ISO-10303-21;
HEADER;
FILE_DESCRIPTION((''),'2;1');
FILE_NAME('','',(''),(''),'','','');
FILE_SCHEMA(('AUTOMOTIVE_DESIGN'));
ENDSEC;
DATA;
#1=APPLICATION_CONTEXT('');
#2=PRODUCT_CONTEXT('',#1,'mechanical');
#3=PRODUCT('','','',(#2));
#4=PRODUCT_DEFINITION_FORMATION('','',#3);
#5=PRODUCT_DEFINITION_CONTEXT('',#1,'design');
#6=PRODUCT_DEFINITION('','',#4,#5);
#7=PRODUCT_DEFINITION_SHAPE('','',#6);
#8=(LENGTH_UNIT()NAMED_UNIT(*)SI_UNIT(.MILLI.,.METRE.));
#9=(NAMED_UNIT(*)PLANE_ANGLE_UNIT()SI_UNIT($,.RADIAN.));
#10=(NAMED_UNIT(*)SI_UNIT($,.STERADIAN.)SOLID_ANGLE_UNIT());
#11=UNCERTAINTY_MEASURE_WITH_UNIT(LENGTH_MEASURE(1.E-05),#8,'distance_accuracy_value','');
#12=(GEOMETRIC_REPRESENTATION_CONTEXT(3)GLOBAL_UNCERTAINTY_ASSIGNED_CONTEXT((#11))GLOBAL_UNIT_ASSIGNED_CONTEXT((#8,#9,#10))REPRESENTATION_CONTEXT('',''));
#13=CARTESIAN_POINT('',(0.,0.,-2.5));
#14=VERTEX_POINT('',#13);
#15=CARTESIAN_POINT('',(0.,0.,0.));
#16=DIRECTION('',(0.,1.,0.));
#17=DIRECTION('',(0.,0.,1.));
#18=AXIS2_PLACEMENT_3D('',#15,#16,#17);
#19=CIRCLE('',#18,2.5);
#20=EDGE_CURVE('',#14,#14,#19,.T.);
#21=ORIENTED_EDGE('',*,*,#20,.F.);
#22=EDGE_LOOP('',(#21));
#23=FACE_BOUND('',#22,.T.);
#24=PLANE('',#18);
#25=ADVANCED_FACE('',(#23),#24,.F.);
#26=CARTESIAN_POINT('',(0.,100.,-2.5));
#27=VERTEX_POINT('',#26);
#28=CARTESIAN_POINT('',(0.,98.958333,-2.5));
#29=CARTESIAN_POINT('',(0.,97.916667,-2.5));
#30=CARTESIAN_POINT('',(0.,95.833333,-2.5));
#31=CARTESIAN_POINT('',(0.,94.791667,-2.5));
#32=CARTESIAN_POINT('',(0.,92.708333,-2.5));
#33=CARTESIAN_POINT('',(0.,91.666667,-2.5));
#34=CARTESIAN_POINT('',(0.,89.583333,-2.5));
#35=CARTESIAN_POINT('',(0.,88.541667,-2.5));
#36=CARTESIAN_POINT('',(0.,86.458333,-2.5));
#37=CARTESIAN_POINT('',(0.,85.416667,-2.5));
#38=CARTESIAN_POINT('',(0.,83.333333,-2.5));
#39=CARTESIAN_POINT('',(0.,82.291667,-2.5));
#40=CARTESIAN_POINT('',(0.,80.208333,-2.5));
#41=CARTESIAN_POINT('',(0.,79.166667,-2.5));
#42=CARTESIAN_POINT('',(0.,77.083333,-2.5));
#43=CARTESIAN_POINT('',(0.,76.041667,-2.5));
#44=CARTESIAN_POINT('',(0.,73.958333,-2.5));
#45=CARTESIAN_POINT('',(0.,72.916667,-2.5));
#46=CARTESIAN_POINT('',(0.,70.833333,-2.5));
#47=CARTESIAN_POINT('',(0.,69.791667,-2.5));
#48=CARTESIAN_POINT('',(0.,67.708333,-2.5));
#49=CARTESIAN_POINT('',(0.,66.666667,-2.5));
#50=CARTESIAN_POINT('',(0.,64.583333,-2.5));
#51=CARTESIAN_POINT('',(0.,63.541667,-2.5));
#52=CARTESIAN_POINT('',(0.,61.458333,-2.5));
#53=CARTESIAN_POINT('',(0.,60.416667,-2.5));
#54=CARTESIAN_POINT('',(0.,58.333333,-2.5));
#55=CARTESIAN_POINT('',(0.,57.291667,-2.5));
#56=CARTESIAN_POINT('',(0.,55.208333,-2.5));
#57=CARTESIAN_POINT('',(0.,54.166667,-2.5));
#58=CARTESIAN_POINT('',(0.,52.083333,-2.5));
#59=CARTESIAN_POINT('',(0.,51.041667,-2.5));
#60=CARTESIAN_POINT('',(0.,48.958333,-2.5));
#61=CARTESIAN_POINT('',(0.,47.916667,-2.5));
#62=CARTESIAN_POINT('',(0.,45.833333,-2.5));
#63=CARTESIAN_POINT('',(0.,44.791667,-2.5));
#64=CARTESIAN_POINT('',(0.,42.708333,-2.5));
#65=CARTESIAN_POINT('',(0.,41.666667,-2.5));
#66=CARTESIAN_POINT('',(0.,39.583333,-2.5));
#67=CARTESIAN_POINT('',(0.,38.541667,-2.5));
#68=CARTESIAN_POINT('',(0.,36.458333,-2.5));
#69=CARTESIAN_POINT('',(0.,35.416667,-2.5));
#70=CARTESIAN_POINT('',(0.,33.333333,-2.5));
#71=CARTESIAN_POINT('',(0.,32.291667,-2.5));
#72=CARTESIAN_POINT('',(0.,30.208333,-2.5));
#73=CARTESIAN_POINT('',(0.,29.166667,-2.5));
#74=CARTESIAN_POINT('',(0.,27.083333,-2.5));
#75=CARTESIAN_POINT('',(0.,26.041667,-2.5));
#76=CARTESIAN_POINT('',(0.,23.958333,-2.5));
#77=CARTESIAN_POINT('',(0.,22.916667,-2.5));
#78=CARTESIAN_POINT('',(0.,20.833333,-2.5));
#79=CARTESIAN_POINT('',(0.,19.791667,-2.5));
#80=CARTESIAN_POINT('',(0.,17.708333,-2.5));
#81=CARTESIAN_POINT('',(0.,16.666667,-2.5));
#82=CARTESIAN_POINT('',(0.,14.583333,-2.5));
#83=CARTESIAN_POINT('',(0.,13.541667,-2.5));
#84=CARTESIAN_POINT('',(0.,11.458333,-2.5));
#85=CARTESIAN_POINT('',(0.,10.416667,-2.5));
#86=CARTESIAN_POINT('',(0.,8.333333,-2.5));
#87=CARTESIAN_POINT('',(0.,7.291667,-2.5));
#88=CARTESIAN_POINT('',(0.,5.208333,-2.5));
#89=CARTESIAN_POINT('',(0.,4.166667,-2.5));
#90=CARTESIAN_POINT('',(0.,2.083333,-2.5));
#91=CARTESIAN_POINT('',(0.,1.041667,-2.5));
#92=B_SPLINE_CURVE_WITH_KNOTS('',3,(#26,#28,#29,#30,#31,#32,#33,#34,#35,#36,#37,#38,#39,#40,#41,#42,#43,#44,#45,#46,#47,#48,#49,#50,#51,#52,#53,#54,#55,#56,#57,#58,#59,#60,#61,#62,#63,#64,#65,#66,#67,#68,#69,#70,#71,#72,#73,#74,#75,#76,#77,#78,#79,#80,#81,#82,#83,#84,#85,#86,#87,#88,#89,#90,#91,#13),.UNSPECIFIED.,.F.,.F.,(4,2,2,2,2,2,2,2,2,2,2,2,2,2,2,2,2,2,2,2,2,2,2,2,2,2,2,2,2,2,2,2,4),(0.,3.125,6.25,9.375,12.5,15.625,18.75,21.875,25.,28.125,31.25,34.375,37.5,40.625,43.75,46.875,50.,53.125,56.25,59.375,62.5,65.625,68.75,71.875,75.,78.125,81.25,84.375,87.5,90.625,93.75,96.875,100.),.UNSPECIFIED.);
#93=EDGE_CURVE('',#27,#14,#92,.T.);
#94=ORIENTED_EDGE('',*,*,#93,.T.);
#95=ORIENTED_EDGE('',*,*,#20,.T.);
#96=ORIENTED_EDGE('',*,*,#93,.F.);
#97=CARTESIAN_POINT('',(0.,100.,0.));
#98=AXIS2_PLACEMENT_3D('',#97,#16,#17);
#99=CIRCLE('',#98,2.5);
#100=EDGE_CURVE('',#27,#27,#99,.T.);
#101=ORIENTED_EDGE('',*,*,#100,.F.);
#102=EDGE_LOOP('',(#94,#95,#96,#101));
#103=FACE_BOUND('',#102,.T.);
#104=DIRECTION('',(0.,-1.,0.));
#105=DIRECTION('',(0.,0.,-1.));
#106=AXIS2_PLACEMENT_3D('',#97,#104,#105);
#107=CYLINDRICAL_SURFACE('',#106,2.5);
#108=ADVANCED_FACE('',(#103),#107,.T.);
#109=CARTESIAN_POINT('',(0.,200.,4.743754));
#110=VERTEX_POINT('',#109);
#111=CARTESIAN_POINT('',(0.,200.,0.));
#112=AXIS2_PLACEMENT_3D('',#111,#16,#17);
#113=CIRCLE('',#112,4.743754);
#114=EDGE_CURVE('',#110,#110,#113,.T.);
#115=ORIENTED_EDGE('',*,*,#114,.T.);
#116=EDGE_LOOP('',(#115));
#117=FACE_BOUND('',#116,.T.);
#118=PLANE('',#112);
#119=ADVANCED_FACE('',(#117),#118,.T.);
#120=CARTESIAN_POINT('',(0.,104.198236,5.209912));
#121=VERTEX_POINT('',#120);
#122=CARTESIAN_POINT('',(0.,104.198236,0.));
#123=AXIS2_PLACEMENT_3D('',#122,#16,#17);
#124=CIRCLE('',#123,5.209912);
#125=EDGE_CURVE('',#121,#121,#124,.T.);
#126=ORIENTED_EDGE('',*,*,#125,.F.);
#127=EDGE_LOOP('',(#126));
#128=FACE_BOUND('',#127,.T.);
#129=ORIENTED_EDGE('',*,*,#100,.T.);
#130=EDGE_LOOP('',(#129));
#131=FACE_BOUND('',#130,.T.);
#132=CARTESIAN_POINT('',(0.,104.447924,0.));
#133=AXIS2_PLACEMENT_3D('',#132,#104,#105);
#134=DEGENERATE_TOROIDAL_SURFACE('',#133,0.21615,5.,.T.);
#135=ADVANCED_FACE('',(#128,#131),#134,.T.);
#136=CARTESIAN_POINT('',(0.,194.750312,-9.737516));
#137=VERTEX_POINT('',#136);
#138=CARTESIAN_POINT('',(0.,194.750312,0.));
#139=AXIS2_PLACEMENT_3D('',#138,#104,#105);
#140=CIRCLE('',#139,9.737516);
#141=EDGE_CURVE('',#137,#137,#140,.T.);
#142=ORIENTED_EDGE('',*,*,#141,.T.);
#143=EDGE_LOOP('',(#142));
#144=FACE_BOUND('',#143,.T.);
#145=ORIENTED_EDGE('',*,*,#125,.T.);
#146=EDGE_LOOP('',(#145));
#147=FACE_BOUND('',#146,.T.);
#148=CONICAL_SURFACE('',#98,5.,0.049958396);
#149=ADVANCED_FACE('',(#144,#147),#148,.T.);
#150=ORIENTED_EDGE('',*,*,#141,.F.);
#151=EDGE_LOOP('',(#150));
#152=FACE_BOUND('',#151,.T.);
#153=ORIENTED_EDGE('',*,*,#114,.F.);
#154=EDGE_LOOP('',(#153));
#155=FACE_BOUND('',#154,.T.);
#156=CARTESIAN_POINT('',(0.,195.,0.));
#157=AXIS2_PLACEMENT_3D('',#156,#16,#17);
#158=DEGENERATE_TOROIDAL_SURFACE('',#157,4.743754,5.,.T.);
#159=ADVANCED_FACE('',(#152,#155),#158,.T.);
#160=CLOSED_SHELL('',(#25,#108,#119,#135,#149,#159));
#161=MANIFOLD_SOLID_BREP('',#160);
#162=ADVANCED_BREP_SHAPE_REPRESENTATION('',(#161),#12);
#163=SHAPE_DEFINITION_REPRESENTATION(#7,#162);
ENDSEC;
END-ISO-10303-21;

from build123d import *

# Parameters (mm, degrees)
SKETCH1_R           = 2.5
BOSS_EXTRUDE1_DEPTH = 100
SKETCH3_R           = 10
SKETCH2_R           = 5
FILLET1_R           = 5


with BuildPart() as part:
    # Sketch1 → Boss-Extrude1 (new body)
    with BuildSketch(Plane(origin=(0, 0, 0), x_dir=(1, 0, 0), z_dir=(0, 1, 0))):
        with Locations(Location((0, 0, 0), (0, 0, 90))):
            Circle(SKETCH1_R)
    extrude(amount=BOSS_EXTRUDE1_DEPTH)

    # Sketch3 → Loft1 section 0
    with BuildSketch(Plane(origin=(0, 200, 0), x_dir=(1, 0, 0), z_dir=(0, 1, 0))):
        Circle(SKETCH3_R)
    # Sketch2 → Loft1 section 1
    with BuildSketch(Plane(origin=(0, 100, 0), x_dir=(1, 0, 0), z_dir=(0, 1, 0))):
        Circle(SKETCH2_R)
    loft()

    # Fillet1
    # the kernel refuses this fillet: 5 mm, written as the material it takes off along each edge
    with BuildSketch(Plane(origin=(0, 200, 0), x_dir=(1, 0, 0), z_dir=(0, 0, 1))) as fillet1_piece_1:
        with BuildLine():
            CenterArc((10 - FILLET1_R * 1.05124921973, -FILLET1_R), FILLET1_R, 357.137594774, 92.862405226)
            Line((10 - FILLET1_R * 1.05124921973, 0), (10 - FILLET1_R * 1.05124921973, FILLET1_R * 0.02))
            Line((10 - FILLET1_R * 1.05124921973, FILLET1_R * 0.02), (10 + FILLET1_R * 0.0210249843945, FILLET1_R * 0.02))
            Line((10 + FILLET1_R * 0.0210249843945, FILLET1_R * 0.02), (10 - FILLET1_R * 0.0325218340696, -FILLET1_R * 1.05093636928))
            Line((10 - FILLET1_R * 0.0325218340696, -FILLET1_R * 1.05093636928), (10 - FILLET1_R * 0.0524968808472, -FILLET1_R * 1.04993761694))
        make_face()
    revolve(axis=Axis((0, 200, 0), (0, 1, 0)), mode=Mode.SUBTRACT)
    with BuildSketch(Plane(origin=(0, 100, 0), x_dir=(1, 0, 0), z_dir=(0, 0, 1))) as fillet1_piece_2:
        with BuildLine():
            CenterArc((0.216150111, 4.4479242), FILLET1_R, 297.178875661, 59.958719113)
            Line((2.5, 0), (2.545676998, -0.088958484))
            ThreePointArc((2.545676998, -0.088958484), (3.75, -0.1), (5, -0.1))
            Line((5, -0.1), (5.099875234, -0.004993762))
            Line((5.099875234, -0.004993762), (5.30978704, 4.193242353))
            Line((5.30978704, 4.193242353), (5.209911806, 4.198236115))
        make_face()
    revolve(axis=Axis((0, 100, 0), (0, 1, 0)), mode=Mode.SUBTRACT)


solid = part.part
